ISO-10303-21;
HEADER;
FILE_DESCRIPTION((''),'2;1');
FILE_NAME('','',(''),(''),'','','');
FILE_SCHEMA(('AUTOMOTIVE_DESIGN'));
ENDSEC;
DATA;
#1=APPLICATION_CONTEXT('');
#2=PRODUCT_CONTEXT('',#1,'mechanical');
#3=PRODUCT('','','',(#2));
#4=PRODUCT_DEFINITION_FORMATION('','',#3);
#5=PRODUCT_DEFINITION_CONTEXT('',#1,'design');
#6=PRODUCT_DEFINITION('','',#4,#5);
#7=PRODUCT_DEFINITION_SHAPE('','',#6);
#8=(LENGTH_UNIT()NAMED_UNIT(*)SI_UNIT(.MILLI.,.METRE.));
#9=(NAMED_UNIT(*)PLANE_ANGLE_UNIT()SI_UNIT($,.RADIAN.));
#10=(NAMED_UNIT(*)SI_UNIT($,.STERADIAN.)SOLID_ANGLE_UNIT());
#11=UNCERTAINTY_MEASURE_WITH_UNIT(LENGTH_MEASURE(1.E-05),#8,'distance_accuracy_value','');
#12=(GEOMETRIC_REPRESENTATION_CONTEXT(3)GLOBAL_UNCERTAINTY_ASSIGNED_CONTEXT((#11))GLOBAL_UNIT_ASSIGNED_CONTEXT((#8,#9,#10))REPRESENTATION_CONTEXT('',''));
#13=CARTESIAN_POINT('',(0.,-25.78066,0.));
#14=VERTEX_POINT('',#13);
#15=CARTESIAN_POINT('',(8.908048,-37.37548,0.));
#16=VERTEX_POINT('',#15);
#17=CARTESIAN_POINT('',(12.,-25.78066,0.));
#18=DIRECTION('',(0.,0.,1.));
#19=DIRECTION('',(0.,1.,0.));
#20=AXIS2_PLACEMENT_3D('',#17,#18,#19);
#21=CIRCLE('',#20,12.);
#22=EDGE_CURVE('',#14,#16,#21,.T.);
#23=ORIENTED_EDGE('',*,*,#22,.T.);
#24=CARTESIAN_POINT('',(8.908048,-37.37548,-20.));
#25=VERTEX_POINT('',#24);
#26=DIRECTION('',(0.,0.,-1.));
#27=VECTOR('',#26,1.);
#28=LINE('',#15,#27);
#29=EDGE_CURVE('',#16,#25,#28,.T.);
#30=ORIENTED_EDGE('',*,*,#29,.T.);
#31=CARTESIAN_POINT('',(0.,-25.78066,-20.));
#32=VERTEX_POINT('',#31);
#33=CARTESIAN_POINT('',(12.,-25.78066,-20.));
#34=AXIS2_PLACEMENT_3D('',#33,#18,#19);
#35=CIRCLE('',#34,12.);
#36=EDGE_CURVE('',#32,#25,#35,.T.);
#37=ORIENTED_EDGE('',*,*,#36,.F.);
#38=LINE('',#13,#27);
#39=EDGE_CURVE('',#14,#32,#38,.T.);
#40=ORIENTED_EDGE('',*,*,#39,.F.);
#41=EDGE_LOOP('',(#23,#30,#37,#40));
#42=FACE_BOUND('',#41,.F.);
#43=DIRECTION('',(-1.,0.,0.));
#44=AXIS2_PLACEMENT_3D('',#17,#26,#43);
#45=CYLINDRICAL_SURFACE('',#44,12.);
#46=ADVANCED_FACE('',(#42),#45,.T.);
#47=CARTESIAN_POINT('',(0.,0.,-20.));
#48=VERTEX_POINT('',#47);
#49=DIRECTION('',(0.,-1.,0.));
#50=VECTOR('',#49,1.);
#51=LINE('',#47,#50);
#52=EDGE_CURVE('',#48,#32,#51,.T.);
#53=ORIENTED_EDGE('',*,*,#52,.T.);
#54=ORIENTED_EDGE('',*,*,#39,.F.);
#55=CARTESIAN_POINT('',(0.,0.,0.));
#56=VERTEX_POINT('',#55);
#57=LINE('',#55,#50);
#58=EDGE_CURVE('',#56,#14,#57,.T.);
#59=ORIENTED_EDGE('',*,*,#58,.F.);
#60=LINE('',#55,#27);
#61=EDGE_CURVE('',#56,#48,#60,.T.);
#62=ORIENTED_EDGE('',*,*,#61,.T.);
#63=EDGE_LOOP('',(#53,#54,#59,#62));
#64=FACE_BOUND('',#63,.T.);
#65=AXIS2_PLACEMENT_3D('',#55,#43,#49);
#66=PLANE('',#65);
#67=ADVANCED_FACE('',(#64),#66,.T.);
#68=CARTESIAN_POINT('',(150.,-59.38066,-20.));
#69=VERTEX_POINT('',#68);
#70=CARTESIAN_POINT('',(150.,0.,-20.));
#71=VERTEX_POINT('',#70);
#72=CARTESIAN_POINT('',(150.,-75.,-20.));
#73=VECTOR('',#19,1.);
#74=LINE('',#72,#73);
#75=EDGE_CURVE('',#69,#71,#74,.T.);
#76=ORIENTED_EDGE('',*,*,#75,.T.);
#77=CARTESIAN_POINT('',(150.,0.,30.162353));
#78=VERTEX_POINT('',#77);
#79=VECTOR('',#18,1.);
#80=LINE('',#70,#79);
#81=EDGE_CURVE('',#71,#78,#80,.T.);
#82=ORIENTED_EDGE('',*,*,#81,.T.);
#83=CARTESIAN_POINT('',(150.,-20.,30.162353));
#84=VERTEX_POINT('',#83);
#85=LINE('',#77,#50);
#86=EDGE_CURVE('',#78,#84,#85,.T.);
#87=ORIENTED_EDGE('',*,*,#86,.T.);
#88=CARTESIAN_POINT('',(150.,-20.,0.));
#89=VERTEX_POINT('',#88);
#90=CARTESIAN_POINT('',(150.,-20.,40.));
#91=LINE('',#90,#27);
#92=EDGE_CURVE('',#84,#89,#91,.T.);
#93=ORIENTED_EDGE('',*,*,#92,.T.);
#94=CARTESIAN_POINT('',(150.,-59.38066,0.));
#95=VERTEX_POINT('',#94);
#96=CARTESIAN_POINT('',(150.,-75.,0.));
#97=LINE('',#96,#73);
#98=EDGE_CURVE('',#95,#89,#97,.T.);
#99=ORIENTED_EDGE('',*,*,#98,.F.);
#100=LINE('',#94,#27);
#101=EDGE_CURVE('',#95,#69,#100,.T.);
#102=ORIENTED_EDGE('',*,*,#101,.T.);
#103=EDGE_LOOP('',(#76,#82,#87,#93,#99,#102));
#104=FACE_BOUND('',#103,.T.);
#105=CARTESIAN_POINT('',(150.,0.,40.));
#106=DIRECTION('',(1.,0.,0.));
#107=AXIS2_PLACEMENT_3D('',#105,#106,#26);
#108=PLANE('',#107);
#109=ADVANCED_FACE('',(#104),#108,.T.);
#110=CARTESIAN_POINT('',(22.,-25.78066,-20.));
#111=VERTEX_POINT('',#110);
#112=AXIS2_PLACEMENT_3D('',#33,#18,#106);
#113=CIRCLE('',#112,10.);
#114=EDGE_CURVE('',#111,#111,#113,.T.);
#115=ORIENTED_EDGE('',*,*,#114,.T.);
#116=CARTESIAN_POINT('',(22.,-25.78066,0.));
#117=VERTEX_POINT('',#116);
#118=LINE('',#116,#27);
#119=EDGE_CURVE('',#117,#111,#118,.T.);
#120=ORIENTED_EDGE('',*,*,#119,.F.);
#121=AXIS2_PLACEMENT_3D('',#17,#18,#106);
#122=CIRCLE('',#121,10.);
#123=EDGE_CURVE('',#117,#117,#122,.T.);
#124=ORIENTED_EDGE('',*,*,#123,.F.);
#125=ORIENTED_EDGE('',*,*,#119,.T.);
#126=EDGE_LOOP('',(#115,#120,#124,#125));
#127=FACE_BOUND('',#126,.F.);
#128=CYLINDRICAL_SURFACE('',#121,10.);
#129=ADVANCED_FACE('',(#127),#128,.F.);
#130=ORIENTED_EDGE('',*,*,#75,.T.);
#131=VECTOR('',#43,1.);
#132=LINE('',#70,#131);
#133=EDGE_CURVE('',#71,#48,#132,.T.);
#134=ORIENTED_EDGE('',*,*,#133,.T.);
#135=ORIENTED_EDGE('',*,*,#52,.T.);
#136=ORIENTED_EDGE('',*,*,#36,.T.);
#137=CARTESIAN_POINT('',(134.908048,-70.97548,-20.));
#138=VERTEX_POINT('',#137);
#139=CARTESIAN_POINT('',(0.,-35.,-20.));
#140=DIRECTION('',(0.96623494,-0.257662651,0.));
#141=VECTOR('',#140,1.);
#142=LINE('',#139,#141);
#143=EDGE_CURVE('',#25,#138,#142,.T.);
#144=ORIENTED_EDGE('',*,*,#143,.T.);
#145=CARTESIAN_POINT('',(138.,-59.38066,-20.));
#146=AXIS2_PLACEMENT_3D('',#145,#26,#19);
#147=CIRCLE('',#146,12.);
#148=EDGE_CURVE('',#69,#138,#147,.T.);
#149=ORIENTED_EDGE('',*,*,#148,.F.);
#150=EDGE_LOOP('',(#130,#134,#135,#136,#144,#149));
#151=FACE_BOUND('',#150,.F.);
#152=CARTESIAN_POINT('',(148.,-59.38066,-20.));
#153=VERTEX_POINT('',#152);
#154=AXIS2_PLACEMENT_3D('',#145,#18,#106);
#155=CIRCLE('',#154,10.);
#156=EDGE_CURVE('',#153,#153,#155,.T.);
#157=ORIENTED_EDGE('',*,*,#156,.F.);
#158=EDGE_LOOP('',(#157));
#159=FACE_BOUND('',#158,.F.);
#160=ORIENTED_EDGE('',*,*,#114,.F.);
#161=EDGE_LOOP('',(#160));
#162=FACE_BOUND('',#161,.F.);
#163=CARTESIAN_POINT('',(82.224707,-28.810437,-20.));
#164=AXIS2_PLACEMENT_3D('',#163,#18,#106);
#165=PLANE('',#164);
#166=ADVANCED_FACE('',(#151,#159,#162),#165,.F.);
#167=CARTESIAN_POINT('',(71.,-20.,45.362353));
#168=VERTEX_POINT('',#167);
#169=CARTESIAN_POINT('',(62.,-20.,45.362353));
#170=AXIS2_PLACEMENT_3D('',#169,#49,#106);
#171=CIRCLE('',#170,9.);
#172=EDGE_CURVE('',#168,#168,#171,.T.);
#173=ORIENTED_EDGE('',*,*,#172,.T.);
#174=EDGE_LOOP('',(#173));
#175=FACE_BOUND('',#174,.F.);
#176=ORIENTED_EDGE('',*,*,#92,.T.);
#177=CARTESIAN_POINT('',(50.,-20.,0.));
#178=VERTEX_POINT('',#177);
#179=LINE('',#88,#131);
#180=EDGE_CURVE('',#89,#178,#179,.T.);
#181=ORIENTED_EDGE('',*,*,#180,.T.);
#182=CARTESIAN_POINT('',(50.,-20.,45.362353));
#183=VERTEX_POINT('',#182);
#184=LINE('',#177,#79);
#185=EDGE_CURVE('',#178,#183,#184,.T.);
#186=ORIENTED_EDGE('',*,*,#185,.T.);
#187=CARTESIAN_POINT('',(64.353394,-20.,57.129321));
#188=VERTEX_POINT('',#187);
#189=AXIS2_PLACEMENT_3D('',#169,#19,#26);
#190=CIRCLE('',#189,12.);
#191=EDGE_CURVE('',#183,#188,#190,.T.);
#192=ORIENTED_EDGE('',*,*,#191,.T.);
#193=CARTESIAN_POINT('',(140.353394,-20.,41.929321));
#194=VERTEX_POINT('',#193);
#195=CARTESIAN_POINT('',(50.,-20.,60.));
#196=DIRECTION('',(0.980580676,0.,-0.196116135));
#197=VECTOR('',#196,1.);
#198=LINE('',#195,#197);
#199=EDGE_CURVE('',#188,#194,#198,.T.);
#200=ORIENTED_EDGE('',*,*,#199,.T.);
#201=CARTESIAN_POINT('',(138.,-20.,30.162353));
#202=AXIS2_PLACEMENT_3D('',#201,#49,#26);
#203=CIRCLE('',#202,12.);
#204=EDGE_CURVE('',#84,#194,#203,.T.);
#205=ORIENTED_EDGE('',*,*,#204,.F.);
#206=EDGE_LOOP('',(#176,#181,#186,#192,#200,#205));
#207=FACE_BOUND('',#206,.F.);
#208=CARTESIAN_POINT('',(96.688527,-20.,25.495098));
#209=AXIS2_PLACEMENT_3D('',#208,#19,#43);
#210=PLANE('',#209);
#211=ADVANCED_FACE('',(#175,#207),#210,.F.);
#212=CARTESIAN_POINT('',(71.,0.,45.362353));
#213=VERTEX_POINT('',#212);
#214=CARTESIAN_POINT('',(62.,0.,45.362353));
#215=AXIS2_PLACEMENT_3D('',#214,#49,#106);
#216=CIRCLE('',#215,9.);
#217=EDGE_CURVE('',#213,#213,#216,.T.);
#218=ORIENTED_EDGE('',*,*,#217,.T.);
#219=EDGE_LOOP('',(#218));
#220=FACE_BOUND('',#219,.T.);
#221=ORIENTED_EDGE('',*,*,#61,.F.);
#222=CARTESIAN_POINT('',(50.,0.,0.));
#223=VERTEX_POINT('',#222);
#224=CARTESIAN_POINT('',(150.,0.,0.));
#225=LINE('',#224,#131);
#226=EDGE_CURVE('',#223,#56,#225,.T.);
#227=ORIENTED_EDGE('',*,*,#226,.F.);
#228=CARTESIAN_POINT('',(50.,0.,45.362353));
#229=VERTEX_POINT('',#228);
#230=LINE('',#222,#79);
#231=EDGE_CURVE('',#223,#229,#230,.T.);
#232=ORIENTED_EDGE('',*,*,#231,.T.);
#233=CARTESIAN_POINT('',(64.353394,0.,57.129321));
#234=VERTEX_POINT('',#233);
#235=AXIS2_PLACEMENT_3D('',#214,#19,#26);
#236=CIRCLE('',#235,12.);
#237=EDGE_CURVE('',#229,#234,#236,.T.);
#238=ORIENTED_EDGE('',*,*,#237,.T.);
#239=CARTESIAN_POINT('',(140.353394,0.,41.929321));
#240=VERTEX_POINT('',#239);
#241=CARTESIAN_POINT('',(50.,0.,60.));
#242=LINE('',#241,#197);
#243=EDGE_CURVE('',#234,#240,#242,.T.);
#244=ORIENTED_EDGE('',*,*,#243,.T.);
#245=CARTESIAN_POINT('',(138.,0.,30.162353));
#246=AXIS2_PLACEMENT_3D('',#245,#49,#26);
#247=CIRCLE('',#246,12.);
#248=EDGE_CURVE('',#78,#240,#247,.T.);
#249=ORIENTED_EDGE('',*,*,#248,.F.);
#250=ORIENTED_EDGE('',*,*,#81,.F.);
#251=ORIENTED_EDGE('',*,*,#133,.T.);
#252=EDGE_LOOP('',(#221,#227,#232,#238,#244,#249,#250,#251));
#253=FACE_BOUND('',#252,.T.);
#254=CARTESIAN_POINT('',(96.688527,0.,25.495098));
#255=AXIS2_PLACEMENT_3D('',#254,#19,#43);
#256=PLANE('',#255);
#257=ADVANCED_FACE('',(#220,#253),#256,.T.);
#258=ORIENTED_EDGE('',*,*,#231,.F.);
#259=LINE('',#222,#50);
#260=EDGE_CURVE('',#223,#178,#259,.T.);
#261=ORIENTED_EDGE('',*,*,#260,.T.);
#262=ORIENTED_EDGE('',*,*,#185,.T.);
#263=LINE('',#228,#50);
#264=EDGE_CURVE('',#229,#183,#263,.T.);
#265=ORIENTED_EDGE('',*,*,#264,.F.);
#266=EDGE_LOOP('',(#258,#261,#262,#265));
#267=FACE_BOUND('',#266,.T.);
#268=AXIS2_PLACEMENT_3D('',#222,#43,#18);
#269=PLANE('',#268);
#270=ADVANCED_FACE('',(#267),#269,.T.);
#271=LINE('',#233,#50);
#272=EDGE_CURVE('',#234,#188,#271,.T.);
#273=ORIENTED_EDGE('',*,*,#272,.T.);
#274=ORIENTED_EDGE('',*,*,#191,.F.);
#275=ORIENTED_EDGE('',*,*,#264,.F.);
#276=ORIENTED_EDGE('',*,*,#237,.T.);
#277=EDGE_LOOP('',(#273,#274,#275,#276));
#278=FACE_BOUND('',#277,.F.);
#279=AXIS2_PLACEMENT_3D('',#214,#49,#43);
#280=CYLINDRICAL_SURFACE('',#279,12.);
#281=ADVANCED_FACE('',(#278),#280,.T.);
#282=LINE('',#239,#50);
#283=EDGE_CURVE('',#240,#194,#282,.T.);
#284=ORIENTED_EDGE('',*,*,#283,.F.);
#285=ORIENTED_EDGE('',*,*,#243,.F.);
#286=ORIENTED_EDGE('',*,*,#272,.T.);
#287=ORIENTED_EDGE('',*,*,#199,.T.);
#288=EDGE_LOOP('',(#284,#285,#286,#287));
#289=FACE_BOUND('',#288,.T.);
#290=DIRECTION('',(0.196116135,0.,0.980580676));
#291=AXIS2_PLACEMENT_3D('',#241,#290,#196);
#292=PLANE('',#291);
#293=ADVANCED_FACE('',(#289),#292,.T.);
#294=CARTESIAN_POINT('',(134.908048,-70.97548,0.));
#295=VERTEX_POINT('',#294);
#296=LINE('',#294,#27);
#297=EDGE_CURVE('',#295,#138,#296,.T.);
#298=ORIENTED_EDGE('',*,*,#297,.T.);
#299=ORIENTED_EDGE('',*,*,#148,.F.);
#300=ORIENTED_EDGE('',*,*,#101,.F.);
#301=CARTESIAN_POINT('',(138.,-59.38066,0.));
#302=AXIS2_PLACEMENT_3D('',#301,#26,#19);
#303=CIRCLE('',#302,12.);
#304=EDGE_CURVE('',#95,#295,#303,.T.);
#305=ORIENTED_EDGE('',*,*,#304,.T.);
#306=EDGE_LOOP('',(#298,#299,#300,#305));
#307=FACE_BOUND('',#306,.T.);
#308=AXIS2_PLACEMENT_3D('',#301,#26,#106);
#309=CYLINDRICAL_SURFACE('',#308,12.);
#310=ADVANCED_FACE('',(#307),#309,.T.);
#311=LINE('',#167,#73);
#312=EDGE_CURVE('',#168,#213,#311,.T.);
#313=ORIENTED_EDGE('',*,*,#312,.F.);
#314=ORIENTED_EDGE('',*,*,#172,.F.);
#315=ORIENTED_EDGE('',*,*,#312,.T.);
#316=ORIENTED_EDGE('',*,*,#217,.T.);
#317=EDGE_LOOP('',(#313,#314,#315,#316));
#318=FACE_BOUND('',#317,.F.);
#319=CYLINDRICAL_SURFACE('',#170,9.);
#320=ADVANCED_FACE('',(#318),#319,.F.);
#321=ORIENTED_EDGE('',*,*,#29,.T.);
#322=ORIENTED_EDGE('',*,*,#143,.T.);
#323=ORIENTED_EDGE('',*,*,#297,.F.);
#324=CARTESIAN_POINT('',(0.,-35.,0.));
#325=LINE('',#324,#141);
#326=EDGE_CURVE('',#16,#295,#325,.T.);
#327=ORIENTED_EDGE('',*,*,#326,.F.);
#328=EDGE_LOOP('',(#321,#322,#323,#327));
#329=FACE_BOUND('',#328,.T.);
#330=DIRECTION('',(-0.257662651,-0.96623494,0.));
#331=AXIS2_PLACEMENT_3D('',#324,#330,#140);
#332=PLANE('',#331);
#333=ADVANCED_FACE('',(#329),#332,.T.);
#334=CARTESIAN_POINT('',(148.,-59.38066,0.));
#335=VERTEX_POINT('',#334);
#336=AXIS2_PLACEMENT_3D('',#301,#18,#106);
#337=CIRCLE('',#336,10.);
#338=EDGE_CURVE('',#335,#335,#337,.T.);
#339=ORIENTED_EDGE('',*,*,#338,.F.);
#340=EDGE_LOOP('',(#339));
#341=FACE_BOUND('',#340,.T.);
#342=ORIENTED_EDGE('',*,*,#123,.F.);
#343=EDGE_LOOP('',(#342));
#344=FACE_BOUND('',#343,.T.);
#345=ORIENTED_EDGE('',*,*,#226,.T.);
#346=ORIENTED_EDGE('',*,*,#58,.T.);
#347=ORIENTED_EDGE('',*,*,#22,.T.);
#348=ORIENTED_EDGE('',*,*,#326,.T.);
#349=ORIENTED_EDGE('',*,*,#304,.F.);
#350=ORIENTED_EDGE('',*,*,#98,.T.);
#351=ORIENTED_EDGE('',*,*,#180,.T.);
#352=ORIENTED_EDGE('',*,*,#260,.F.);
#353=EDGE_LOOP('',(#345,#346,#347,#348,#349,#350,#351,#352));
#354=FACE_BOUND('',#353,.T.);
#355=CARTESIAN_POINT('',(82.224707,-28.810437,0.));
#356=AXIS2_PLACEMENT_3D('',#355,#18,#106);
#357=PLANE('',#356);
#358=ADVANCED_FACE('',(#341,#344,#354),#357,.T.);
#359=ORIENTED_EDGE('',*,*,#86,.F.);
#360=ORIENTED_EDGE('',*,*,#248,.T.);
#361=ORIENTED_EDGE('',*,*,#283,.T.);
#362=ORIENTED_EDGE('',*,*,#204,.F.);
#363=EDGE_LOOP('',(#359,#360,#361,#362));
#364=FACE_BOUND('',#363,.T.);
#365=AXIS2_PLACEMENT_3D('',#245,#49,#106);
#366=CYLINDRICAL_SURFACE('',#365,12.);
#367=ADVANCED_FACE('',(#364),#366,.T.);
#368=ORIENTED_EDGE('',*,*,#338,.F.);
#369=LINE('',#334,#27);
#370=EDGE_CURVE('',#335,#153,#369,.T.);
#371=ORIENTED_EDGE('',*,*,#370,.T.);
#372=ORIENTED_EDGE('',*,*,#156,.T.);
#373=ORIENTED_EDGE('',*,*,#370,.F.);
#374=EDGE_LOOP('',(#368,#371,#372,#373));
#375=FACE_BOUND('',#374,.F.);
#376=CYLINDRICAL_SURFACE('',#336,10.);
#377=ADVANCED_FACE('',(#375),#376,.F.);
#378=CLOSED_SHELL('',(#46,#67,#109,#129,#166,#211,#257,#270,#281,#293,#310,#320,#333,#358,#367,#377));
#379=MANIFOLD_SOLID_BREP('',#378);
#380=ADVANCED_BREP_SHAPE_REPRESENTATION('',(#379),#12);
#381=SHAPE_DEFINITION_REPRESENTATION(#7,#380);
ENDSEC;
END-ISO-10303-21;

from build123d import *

# Parameters (mm, degrees)
F1_DEPTH  = 20
F3_DEPTH  = 20
F4_R      = 12
F5_R      = 10
F6_DEPTH  = 25
F7_R      = 10
F8_DEPTH  = 25
F9_R      = 9
F10_DEPTH = 25


with BuildPart() as f1:
    # F0 (on Top) → F1 (new body)
    with BuildSketch(Plane.XY):
        Polygon((150, 0), (0, 0), (0, -35), (150, -75), align=None)
    extrude(amount=-F1_DEPTH)

    # F2 (on face) → F3 (join)
    with BuildSketch(Plane(origin=(0, 0, 0), x_dir=(-1, 0, 0), z_dir=(0, 1, 0))):
        Polygon((-150, 40), (-150, 0), (-50, 0), (-50, 60), align=None)
    extrude(amount=-F3_DEPTH)

    # F4
    f4_edges = [f1.edges().sort_by_distance(p)[0] for p in [
        (0, -35, -10),
        (150, -75, -10),
        (50, -10, 60),
        (150, -10, 40),
    ]]
    fillet(f4_edges, radius=F4_R)

    # F5 (on face) → F6 (cut)
    with BuildSketch(Plane.XY):
        with Locations((12, -25.780660243)):
            Circle(F5_R)
    extrude(amount=-F6_DEPTH, mode=Mode.SUBTRACT)

    # F7 (on face) → F8 (cut)
    with BuildSketch(Plane.XY):
        with Locations((138, -59.380660243)):
            Circle(F7_R)
    extrude(amount=-F8_DEPTH, mode=Mode.SUBTRACT)

    # F9 (on face) → F10 (cut)
    with BuildSketch(Plane.XZ.offset(20)):
        with Locations((62, 45.3623531674)):
            Circle(F9_R)
    extrude(amount=-F10_DEPTH, mode=Mode.SUBTRACT)


solid = f1.part
